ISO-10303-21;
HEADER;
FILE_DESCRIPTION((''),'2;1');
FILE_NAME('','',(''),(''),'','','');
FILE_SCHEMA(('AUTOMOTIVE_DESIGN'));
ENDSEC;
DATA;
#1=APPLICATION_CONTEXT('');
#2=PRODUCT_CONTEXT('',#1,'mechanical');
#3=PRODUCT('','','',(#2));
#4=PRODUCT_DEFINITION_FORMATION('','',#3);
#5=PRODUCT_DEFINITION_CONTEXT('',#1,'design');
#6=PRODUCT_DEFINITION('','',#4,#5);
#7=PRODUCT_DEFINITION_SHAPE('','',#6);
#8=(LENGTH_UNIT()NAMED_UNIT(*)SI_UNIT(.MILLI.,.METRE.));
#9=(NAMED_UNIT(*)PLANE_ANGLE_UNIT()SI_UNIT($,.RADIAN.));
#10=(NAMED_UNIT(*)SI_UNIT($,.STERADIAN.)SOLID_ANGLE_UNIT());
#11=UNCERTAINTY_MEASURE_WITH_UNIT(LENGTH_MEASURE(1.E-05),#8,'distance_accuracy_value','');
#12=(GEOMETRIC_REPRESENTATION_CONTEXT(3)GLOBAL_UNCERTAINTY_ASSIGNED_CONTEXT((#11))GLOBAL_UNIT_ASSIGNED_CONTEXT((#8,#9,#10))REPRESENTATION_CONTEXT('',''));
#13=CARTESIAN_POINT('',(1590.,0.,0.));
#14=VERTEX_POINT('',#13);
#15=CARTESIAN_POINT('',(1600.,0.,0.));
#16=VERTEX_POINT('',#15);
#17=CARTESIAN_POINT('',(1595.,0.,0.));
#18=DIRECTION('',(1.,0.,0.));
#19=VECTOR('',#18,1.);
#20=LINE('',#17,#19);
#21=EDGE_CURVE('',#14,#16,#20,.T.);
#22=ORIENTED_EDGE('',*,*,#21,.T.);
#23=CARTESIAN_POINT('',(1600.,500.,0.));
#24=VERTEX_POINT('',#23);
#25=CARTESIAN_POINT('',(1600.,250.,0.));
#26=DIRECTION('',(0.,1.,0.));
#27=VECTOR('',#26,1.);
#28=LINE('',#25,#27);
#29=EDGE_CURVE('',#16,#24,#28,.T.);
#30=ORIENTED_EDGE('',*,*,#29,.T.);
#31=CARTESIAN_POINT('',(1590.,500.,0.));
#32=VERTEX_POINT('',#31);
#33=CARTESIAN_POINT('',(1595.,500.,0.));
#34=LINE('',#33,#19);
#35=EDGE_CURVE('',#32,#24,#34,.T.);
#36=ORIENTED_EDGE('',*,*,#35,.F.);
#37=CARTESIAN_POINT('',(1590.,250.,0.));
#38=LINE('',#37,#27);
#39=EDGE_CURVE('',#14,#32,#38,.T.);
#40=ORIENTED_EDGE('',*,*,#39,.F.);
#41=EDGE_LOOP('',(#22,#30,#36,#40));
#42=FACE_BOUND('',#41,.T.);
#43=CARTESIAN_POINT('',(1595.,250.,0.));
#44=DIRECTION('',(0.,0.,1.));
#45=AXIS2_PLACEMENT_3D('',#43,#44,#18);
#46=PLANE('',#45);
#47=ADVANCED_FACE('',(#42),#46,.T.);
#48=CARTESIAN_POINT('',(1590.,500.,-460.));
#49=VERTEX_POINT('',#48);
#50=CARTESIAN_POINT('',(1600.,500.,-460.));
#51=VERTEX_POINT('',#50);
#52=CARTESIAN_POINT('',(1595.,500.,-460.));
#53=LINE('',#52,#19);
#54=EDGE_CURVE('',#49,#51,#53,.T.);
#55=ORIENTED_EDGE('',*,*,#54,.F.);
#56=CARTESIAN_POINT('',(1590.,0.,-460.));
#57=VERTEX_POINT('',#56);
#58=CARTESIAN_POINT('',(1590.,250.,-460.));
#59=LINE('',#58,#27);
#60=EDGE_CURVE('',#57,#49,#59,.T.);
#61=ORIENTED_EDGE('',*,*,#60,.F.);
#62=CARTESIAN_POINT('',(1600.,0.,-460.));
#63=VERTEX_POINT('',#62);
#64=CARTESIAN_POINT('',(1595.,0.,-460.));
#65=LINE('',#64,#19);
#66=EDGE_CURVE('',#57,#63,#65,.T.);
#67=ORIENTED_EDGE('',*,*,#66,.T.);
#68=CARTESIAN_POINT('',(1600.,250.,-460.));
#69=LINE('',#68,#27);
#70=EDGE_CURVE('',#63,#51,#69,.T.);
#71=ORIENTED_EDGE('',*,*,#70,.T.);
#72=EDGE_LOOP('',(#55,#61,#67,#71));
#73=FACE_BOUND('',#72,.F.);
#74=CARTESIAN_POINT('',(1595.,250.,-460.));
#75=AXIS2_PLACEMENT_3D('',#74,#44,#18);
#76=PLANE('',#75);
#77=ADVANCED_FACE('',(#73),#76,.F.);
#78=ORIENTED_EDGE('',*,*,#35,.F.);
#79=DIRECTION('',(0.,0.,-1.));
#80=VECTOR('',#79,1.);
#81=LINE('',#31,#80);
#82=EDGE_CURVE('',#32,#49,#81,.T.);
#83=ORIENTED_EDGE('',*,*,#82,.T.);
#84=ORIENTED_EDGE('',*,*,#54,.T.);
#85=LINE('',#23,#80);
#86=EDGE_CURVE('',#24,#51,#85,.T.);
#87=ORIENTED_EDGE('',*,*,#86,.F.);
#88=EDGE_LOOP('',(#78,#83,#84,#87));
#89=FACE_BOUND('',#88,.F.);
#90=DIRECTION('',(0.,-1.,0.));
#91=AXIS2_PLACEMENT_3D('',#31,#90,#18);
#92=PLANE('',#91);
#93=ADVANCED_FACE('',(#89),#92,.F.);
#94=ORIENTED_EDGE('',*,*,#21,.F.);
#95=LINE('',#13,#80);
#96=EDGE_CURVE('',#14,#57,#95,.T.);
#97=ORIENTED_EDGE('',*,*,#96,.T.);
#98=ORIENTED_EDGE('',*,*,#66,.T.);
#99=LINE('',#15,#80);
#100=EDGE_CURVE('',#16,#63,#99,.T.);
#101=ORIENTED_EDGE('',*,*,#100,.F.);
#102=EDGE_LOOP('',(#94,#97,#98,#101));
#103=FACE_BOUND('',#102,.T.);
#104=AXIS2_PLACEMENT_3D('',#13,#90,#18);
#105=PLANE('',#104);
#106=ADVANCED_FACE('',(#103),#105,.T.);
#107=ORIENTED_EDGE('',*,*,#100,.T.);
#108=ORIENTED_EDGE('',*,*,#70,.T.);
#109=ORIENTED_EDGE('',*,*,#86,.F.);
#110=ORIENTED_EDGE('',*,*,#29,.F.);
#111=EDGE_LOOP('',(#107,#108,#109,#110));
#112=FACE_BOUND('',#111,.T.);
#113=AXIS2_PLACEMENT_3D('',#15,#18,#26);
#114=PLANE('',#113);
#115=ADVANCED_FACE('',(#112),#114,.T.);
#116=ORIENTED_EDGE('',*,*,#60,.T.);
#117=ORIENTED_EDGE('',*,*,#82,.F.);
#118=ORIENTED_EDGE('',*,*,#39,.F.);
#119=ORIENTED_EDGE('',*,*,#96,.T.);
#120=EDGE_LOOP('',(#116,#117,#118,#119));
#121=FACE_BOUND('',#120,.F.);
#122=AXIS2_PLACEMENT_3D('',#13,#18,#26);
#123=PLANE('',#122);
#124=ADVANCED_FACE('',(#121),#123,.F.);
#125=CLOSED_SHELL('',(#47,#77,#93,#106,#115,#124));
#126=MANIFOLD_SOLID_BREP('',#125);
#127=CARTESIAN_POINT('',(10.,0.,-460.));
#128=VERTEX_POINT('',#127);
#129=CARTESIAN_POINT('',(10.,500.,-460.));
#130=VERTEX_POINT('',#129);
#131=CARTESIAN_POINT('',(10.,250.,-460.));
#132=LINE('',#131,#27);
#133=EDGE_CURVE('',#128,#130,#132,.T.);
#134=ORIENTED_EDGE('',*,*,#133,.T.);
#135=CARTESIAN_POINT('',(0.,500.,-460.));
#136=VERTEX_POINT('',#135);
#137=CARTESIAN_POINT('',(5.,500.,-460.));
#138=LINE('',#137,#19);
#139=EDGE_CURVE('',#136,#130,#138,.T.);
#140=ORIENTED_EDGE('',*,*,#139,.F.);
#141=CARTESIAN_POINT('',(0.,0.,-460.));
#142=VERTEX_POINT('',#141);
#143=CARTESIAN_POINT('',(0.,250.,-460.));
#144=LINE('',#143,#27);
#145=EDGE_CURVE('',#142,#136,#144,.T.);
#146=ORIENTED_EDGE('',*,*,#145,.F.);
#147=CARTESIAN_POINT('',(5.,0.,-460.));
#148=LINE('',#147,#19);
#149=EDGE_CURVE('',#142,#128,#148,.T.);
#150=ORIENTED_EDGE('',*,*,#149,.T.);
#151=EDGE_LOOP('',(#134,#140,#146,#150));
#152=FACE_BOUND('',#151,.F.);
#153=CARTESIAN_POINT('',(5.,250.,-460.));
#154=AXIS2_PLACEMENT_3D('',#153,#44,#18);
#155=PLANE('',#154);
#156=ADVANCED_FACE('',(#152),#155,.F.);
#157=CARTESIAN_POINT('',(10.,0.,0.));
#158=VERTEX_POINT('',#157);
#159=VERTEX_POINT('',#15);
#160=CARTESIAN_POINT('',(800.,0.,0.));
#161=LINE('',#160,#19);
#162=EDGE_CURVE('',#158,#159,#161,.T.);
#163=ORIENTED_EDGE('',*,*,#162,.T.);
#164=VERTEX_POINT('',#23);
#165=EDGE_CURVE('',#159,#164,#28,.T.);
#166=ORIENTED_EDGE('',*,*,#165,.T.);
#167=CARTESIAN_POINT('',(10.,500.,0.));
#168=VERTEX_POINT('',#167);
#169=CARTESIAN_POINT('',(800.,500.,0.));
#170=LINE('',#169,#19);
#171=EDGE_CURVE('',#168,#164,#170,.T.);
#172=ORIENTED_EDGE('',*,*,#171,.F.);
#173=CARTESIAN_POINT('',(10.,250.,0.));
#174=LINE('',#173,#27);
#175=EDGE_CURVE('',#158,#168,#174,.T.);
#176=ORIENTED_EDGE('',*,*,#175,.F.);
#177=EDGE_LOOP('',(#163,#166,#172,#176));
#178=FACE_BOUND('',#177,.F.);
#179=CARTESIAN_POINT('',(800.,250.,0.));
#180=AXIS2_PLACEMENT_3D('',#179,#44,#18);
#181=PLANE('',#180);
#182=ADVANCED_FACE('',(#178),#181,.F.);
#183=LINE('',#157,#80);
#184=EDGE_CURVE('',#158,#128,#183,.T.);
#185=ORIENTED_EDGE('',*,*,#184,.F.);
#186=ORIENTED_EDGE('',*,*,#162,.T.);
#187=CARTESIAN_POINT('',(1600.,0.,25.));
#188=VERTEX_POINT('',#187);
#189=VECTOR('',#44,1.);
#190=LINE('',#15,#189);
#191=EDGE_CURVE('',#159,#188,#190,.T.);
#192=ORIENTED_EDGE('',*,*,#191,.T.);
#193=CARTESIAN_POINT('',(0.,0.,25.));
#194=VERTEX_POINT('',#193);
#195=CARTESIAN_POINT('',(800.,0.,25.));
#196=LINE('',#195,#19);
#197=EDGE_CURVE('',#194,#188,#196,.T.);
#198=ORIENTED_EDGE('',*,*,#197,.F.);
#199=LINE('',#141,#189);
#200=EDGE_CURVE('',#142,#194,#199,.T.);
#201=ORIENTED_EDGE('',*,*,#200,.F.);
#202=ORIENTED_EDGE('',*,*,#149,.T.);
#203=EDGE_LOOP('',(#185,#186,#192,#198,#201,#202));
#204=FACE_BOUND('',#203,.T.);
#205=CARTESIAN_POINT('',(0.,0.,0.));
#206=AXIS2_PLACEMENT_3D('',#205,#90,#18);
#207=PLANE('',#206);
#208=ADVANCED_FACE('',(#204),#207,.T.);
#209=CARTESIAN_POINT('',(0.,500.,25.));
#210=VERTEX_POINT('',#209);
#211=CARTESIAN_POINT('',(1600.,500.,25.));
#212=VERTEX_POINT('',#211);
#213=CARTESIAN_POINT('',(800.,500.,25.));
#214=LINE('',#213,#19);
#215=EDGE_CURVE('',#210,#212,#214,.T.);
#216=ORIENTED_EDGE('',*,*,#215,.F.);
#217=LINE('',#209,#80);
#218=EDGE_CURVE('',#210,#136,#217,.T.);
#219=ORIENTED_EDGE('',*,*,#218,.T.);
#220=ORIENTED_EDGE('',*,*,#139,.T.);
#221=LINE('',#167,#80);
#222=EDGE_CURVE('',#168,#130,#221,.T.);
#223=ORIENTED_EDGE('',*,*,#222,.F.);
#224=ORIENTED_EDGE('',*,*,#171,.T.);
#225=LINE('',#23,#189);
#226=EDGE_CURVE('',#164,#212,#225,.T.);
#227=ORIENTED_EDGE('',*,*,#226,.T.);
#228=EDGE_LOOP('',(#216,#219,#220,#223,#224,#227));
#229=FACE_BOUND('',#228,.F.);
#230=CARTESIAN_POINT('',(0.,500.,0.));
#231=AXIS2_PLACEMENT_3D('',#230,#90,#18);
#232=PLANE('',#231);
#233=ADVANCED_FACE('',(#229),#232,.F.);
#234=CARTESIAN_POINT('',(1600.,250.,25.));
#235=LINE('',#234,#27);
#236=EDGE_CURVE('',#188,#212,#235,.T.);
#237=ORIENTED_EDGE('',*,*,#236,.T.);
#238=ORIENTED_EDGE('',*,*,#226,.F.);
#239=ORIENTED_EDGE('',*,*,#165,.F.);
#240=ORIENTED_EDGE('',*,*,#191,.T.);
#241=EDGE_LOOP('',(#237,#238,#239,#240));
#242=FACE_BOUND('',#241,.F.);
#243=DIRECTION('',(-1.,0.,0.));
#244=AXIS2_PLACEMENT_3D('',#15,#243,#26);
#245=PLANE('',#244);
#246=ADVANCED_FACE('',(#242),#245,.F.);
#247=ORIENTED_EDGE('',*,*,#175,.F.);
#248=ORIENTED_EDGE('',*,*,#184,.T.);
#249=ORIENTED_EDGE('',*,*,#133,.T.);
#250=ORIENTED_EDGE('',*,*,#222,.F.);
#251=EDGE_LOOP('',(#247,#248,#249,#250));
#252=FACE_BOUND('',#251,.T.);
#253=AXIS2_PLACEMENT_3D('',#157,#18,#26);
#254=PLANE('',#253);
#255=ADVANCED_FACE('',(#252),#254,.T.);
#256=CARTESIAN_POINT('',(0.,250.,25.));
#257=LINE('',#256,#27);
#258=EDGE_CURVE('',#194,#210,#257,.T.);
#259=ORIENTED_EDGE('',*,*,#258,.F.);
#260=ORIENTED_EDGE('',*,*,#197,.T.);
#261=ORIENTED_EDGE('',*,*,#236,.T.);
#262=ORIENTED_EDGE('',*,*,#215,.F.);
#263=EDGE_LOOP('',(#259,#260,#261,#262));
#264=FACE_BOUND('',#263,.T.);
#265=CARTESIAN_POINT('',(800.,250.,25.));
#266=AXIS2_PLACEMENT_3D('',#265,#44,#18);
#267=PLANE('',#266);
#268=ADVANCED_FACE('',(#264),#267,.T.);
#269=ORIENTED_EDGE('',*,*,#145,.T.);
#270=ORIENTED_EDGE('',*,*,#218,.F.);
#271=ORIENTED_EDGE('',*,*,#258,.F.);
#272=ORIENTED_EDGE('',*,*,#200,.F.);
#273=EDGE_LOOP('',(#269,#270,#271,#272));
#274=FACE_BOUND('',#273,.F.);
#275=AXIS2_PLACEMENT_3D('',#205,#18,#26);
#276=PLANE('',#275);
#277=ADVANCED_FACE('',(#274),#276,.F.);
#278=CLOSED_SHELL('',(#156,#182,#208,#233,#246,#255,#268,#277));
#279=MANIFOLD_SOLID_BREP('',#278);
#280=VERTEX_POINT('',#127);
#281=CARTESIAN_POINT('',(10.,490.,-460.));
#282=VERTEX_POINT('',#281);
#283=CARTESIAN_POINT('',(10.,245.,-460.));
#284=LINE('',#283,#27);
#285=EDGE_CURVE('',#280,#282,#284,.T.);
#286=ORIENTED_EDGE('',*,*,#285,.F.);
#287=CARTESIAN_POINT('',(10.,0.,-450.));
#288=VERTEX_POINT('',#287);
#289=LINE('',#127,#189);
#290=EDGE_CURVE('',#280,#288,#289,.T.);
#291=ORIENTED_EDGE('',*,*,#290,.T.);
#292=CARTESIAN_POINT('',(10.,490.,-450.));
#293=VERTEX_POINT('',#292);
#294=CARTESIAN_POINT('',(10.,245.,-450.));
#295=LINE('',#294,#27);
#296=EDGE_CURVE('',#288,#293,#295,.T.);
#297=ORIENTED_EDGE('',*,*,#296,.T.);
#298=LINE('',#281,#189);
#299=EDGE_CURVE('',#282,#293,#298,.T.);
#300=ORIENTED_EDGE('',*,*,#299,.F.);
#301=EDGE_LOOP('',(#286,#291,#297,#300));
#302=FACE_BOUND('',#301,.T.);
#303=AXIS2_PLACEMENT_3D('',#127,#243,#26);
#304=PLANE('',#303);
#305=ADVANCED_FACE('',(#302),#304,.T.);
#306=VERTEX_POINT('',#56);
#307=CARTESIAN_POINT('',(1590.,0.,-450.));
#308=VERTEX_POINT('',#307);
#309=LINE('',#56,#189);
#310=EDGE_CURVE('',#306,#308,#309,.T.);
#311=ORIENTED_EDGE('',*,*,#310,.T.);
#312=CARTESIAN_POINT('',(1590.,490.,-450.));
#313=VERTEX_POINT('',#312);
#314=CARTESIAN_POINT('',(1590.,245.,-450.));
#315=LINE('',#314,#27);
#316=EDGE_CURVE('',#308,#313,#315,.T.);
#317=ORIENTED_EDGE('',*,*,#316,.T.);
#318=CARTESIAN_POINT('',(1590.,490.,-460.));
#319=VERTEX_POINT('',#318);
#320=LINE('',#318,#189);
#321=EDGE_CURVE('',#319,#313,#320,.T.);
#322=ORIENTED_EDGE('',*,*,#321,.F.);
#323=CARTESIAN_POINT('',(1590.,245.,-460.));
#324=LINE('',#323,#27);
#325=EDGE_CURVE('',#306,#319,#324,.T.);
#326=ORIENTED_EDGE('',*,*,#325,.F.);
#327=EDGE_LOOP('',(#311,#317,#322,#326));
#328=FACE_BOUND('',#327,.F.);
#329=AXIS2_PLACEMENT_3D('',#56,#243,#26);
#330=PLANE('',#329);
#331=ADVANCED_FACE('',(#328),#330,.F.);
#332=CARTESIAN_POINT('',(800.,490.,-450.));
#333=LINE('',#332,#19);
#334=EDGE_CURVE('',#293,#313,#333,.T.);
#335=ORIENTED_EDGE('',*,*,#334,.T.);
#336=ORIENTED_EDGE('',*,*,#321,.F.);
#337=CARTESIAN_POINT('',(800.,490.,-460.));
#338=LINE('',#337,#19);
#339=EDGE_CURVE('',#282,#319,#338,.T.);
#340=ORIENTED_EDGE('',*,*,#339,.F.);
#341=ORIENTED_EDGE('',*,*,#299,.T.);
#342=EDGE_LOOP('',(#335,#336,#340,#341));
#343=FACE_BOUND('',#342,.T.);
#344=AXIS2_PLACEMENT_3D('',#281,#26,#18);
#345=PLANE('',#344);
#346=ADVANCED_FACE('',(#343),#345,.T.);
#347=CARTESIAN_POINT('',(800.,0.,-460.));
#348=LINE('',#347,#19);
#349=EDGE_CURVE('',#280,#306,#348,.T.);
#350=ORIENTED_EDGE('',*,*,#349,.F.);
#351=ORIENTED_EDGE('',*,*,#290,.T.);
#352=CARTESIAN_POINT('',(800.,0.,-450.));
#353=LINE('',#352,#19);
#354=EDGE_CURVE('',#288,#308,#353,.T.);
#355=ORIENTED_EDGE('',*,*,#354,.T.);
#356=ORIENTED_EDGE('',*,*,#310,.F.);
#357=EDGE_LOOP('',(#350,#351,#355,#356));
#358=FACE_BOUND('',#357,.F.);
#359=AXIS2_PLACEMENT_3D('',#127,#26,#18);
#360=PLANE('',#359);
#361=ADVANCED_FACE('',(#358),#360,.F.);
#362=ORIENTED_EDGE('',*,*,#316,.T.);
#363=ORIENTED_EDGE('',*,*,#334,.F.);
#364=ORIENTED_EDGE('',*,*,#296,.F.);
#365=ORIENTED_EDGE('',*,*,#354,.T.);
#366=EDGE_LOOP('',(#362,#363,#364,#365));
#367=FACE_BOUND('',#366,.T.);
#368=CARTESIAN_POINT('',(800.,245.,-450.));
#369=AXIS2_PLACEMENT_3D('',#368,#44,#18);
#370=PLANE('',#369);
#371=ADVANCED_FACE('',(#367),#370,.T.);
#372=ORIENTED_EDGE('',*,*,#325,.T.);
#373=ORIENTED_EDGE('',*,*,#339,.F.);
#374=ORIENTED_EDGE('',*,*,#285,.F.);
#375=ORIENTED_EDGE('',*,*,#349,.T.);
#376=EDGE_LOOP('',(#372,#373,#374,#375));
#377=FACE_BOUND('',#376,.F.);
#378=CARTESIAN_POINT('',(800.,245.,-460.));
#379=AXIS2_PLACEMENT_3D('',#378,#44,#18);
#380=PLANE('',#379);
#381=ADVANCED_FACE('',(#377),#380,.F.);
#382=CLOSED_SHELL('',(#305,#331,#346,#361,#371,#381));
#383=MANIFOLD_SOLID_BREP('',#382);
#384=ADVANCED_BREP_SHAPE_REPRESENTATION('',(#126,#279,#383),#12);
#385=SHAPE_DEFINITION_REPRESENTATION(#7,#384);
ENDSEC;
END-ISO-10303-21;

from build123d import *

# Parameters (mm, degrees)
F0_W     = 1600
F0_H     = 500
F1_DEPTH = 25
F3_W     = 1580
F3_H     = 490
F4_DEPTH = 10
F5_W     = 10
F5_H     = 500
F6_DEPTH = 460
F7_W     = 10
F7_H     = 500
F8_DEPTH = 460


with BuildPart() as f1:
    # F0 (on Top) → F1 (new body)
    with BuildSketch(Plane.XY):
        with Locations((800, 250)):
            Rectangle(F0_W, F0_H)
    extrude(amount=F1_DEPTH)

    # F5 (on face) → F6 (join, through all)
    with BuildSketch(Plane.XY):
        with Locations((5, 250)):
            Rectangle(F5_W, F5_H)
    extrude(amount=-F6_DEPTH)


with BuildPart() as f4:
    # F3 (on offset) → F4 (new body)
    with BuildSketch(Plane.XY.offset(-460)):
        with Locations((800, 245)):
            Rectangle(F3_W, F3_H)
    extrude(amount=F4_DEPTH)


with BuildPart() as f8:
    # F7 (on face) → F8 (new body, through all)
    with BuildSketch(Plane.XY):
        with Locations((1595, 250)):
            Rectangle(F7_W, F7_H)
    extrude(amount=-F8_DEPTH)


solid = Compound([f1.part, f4.part, f8.part])
